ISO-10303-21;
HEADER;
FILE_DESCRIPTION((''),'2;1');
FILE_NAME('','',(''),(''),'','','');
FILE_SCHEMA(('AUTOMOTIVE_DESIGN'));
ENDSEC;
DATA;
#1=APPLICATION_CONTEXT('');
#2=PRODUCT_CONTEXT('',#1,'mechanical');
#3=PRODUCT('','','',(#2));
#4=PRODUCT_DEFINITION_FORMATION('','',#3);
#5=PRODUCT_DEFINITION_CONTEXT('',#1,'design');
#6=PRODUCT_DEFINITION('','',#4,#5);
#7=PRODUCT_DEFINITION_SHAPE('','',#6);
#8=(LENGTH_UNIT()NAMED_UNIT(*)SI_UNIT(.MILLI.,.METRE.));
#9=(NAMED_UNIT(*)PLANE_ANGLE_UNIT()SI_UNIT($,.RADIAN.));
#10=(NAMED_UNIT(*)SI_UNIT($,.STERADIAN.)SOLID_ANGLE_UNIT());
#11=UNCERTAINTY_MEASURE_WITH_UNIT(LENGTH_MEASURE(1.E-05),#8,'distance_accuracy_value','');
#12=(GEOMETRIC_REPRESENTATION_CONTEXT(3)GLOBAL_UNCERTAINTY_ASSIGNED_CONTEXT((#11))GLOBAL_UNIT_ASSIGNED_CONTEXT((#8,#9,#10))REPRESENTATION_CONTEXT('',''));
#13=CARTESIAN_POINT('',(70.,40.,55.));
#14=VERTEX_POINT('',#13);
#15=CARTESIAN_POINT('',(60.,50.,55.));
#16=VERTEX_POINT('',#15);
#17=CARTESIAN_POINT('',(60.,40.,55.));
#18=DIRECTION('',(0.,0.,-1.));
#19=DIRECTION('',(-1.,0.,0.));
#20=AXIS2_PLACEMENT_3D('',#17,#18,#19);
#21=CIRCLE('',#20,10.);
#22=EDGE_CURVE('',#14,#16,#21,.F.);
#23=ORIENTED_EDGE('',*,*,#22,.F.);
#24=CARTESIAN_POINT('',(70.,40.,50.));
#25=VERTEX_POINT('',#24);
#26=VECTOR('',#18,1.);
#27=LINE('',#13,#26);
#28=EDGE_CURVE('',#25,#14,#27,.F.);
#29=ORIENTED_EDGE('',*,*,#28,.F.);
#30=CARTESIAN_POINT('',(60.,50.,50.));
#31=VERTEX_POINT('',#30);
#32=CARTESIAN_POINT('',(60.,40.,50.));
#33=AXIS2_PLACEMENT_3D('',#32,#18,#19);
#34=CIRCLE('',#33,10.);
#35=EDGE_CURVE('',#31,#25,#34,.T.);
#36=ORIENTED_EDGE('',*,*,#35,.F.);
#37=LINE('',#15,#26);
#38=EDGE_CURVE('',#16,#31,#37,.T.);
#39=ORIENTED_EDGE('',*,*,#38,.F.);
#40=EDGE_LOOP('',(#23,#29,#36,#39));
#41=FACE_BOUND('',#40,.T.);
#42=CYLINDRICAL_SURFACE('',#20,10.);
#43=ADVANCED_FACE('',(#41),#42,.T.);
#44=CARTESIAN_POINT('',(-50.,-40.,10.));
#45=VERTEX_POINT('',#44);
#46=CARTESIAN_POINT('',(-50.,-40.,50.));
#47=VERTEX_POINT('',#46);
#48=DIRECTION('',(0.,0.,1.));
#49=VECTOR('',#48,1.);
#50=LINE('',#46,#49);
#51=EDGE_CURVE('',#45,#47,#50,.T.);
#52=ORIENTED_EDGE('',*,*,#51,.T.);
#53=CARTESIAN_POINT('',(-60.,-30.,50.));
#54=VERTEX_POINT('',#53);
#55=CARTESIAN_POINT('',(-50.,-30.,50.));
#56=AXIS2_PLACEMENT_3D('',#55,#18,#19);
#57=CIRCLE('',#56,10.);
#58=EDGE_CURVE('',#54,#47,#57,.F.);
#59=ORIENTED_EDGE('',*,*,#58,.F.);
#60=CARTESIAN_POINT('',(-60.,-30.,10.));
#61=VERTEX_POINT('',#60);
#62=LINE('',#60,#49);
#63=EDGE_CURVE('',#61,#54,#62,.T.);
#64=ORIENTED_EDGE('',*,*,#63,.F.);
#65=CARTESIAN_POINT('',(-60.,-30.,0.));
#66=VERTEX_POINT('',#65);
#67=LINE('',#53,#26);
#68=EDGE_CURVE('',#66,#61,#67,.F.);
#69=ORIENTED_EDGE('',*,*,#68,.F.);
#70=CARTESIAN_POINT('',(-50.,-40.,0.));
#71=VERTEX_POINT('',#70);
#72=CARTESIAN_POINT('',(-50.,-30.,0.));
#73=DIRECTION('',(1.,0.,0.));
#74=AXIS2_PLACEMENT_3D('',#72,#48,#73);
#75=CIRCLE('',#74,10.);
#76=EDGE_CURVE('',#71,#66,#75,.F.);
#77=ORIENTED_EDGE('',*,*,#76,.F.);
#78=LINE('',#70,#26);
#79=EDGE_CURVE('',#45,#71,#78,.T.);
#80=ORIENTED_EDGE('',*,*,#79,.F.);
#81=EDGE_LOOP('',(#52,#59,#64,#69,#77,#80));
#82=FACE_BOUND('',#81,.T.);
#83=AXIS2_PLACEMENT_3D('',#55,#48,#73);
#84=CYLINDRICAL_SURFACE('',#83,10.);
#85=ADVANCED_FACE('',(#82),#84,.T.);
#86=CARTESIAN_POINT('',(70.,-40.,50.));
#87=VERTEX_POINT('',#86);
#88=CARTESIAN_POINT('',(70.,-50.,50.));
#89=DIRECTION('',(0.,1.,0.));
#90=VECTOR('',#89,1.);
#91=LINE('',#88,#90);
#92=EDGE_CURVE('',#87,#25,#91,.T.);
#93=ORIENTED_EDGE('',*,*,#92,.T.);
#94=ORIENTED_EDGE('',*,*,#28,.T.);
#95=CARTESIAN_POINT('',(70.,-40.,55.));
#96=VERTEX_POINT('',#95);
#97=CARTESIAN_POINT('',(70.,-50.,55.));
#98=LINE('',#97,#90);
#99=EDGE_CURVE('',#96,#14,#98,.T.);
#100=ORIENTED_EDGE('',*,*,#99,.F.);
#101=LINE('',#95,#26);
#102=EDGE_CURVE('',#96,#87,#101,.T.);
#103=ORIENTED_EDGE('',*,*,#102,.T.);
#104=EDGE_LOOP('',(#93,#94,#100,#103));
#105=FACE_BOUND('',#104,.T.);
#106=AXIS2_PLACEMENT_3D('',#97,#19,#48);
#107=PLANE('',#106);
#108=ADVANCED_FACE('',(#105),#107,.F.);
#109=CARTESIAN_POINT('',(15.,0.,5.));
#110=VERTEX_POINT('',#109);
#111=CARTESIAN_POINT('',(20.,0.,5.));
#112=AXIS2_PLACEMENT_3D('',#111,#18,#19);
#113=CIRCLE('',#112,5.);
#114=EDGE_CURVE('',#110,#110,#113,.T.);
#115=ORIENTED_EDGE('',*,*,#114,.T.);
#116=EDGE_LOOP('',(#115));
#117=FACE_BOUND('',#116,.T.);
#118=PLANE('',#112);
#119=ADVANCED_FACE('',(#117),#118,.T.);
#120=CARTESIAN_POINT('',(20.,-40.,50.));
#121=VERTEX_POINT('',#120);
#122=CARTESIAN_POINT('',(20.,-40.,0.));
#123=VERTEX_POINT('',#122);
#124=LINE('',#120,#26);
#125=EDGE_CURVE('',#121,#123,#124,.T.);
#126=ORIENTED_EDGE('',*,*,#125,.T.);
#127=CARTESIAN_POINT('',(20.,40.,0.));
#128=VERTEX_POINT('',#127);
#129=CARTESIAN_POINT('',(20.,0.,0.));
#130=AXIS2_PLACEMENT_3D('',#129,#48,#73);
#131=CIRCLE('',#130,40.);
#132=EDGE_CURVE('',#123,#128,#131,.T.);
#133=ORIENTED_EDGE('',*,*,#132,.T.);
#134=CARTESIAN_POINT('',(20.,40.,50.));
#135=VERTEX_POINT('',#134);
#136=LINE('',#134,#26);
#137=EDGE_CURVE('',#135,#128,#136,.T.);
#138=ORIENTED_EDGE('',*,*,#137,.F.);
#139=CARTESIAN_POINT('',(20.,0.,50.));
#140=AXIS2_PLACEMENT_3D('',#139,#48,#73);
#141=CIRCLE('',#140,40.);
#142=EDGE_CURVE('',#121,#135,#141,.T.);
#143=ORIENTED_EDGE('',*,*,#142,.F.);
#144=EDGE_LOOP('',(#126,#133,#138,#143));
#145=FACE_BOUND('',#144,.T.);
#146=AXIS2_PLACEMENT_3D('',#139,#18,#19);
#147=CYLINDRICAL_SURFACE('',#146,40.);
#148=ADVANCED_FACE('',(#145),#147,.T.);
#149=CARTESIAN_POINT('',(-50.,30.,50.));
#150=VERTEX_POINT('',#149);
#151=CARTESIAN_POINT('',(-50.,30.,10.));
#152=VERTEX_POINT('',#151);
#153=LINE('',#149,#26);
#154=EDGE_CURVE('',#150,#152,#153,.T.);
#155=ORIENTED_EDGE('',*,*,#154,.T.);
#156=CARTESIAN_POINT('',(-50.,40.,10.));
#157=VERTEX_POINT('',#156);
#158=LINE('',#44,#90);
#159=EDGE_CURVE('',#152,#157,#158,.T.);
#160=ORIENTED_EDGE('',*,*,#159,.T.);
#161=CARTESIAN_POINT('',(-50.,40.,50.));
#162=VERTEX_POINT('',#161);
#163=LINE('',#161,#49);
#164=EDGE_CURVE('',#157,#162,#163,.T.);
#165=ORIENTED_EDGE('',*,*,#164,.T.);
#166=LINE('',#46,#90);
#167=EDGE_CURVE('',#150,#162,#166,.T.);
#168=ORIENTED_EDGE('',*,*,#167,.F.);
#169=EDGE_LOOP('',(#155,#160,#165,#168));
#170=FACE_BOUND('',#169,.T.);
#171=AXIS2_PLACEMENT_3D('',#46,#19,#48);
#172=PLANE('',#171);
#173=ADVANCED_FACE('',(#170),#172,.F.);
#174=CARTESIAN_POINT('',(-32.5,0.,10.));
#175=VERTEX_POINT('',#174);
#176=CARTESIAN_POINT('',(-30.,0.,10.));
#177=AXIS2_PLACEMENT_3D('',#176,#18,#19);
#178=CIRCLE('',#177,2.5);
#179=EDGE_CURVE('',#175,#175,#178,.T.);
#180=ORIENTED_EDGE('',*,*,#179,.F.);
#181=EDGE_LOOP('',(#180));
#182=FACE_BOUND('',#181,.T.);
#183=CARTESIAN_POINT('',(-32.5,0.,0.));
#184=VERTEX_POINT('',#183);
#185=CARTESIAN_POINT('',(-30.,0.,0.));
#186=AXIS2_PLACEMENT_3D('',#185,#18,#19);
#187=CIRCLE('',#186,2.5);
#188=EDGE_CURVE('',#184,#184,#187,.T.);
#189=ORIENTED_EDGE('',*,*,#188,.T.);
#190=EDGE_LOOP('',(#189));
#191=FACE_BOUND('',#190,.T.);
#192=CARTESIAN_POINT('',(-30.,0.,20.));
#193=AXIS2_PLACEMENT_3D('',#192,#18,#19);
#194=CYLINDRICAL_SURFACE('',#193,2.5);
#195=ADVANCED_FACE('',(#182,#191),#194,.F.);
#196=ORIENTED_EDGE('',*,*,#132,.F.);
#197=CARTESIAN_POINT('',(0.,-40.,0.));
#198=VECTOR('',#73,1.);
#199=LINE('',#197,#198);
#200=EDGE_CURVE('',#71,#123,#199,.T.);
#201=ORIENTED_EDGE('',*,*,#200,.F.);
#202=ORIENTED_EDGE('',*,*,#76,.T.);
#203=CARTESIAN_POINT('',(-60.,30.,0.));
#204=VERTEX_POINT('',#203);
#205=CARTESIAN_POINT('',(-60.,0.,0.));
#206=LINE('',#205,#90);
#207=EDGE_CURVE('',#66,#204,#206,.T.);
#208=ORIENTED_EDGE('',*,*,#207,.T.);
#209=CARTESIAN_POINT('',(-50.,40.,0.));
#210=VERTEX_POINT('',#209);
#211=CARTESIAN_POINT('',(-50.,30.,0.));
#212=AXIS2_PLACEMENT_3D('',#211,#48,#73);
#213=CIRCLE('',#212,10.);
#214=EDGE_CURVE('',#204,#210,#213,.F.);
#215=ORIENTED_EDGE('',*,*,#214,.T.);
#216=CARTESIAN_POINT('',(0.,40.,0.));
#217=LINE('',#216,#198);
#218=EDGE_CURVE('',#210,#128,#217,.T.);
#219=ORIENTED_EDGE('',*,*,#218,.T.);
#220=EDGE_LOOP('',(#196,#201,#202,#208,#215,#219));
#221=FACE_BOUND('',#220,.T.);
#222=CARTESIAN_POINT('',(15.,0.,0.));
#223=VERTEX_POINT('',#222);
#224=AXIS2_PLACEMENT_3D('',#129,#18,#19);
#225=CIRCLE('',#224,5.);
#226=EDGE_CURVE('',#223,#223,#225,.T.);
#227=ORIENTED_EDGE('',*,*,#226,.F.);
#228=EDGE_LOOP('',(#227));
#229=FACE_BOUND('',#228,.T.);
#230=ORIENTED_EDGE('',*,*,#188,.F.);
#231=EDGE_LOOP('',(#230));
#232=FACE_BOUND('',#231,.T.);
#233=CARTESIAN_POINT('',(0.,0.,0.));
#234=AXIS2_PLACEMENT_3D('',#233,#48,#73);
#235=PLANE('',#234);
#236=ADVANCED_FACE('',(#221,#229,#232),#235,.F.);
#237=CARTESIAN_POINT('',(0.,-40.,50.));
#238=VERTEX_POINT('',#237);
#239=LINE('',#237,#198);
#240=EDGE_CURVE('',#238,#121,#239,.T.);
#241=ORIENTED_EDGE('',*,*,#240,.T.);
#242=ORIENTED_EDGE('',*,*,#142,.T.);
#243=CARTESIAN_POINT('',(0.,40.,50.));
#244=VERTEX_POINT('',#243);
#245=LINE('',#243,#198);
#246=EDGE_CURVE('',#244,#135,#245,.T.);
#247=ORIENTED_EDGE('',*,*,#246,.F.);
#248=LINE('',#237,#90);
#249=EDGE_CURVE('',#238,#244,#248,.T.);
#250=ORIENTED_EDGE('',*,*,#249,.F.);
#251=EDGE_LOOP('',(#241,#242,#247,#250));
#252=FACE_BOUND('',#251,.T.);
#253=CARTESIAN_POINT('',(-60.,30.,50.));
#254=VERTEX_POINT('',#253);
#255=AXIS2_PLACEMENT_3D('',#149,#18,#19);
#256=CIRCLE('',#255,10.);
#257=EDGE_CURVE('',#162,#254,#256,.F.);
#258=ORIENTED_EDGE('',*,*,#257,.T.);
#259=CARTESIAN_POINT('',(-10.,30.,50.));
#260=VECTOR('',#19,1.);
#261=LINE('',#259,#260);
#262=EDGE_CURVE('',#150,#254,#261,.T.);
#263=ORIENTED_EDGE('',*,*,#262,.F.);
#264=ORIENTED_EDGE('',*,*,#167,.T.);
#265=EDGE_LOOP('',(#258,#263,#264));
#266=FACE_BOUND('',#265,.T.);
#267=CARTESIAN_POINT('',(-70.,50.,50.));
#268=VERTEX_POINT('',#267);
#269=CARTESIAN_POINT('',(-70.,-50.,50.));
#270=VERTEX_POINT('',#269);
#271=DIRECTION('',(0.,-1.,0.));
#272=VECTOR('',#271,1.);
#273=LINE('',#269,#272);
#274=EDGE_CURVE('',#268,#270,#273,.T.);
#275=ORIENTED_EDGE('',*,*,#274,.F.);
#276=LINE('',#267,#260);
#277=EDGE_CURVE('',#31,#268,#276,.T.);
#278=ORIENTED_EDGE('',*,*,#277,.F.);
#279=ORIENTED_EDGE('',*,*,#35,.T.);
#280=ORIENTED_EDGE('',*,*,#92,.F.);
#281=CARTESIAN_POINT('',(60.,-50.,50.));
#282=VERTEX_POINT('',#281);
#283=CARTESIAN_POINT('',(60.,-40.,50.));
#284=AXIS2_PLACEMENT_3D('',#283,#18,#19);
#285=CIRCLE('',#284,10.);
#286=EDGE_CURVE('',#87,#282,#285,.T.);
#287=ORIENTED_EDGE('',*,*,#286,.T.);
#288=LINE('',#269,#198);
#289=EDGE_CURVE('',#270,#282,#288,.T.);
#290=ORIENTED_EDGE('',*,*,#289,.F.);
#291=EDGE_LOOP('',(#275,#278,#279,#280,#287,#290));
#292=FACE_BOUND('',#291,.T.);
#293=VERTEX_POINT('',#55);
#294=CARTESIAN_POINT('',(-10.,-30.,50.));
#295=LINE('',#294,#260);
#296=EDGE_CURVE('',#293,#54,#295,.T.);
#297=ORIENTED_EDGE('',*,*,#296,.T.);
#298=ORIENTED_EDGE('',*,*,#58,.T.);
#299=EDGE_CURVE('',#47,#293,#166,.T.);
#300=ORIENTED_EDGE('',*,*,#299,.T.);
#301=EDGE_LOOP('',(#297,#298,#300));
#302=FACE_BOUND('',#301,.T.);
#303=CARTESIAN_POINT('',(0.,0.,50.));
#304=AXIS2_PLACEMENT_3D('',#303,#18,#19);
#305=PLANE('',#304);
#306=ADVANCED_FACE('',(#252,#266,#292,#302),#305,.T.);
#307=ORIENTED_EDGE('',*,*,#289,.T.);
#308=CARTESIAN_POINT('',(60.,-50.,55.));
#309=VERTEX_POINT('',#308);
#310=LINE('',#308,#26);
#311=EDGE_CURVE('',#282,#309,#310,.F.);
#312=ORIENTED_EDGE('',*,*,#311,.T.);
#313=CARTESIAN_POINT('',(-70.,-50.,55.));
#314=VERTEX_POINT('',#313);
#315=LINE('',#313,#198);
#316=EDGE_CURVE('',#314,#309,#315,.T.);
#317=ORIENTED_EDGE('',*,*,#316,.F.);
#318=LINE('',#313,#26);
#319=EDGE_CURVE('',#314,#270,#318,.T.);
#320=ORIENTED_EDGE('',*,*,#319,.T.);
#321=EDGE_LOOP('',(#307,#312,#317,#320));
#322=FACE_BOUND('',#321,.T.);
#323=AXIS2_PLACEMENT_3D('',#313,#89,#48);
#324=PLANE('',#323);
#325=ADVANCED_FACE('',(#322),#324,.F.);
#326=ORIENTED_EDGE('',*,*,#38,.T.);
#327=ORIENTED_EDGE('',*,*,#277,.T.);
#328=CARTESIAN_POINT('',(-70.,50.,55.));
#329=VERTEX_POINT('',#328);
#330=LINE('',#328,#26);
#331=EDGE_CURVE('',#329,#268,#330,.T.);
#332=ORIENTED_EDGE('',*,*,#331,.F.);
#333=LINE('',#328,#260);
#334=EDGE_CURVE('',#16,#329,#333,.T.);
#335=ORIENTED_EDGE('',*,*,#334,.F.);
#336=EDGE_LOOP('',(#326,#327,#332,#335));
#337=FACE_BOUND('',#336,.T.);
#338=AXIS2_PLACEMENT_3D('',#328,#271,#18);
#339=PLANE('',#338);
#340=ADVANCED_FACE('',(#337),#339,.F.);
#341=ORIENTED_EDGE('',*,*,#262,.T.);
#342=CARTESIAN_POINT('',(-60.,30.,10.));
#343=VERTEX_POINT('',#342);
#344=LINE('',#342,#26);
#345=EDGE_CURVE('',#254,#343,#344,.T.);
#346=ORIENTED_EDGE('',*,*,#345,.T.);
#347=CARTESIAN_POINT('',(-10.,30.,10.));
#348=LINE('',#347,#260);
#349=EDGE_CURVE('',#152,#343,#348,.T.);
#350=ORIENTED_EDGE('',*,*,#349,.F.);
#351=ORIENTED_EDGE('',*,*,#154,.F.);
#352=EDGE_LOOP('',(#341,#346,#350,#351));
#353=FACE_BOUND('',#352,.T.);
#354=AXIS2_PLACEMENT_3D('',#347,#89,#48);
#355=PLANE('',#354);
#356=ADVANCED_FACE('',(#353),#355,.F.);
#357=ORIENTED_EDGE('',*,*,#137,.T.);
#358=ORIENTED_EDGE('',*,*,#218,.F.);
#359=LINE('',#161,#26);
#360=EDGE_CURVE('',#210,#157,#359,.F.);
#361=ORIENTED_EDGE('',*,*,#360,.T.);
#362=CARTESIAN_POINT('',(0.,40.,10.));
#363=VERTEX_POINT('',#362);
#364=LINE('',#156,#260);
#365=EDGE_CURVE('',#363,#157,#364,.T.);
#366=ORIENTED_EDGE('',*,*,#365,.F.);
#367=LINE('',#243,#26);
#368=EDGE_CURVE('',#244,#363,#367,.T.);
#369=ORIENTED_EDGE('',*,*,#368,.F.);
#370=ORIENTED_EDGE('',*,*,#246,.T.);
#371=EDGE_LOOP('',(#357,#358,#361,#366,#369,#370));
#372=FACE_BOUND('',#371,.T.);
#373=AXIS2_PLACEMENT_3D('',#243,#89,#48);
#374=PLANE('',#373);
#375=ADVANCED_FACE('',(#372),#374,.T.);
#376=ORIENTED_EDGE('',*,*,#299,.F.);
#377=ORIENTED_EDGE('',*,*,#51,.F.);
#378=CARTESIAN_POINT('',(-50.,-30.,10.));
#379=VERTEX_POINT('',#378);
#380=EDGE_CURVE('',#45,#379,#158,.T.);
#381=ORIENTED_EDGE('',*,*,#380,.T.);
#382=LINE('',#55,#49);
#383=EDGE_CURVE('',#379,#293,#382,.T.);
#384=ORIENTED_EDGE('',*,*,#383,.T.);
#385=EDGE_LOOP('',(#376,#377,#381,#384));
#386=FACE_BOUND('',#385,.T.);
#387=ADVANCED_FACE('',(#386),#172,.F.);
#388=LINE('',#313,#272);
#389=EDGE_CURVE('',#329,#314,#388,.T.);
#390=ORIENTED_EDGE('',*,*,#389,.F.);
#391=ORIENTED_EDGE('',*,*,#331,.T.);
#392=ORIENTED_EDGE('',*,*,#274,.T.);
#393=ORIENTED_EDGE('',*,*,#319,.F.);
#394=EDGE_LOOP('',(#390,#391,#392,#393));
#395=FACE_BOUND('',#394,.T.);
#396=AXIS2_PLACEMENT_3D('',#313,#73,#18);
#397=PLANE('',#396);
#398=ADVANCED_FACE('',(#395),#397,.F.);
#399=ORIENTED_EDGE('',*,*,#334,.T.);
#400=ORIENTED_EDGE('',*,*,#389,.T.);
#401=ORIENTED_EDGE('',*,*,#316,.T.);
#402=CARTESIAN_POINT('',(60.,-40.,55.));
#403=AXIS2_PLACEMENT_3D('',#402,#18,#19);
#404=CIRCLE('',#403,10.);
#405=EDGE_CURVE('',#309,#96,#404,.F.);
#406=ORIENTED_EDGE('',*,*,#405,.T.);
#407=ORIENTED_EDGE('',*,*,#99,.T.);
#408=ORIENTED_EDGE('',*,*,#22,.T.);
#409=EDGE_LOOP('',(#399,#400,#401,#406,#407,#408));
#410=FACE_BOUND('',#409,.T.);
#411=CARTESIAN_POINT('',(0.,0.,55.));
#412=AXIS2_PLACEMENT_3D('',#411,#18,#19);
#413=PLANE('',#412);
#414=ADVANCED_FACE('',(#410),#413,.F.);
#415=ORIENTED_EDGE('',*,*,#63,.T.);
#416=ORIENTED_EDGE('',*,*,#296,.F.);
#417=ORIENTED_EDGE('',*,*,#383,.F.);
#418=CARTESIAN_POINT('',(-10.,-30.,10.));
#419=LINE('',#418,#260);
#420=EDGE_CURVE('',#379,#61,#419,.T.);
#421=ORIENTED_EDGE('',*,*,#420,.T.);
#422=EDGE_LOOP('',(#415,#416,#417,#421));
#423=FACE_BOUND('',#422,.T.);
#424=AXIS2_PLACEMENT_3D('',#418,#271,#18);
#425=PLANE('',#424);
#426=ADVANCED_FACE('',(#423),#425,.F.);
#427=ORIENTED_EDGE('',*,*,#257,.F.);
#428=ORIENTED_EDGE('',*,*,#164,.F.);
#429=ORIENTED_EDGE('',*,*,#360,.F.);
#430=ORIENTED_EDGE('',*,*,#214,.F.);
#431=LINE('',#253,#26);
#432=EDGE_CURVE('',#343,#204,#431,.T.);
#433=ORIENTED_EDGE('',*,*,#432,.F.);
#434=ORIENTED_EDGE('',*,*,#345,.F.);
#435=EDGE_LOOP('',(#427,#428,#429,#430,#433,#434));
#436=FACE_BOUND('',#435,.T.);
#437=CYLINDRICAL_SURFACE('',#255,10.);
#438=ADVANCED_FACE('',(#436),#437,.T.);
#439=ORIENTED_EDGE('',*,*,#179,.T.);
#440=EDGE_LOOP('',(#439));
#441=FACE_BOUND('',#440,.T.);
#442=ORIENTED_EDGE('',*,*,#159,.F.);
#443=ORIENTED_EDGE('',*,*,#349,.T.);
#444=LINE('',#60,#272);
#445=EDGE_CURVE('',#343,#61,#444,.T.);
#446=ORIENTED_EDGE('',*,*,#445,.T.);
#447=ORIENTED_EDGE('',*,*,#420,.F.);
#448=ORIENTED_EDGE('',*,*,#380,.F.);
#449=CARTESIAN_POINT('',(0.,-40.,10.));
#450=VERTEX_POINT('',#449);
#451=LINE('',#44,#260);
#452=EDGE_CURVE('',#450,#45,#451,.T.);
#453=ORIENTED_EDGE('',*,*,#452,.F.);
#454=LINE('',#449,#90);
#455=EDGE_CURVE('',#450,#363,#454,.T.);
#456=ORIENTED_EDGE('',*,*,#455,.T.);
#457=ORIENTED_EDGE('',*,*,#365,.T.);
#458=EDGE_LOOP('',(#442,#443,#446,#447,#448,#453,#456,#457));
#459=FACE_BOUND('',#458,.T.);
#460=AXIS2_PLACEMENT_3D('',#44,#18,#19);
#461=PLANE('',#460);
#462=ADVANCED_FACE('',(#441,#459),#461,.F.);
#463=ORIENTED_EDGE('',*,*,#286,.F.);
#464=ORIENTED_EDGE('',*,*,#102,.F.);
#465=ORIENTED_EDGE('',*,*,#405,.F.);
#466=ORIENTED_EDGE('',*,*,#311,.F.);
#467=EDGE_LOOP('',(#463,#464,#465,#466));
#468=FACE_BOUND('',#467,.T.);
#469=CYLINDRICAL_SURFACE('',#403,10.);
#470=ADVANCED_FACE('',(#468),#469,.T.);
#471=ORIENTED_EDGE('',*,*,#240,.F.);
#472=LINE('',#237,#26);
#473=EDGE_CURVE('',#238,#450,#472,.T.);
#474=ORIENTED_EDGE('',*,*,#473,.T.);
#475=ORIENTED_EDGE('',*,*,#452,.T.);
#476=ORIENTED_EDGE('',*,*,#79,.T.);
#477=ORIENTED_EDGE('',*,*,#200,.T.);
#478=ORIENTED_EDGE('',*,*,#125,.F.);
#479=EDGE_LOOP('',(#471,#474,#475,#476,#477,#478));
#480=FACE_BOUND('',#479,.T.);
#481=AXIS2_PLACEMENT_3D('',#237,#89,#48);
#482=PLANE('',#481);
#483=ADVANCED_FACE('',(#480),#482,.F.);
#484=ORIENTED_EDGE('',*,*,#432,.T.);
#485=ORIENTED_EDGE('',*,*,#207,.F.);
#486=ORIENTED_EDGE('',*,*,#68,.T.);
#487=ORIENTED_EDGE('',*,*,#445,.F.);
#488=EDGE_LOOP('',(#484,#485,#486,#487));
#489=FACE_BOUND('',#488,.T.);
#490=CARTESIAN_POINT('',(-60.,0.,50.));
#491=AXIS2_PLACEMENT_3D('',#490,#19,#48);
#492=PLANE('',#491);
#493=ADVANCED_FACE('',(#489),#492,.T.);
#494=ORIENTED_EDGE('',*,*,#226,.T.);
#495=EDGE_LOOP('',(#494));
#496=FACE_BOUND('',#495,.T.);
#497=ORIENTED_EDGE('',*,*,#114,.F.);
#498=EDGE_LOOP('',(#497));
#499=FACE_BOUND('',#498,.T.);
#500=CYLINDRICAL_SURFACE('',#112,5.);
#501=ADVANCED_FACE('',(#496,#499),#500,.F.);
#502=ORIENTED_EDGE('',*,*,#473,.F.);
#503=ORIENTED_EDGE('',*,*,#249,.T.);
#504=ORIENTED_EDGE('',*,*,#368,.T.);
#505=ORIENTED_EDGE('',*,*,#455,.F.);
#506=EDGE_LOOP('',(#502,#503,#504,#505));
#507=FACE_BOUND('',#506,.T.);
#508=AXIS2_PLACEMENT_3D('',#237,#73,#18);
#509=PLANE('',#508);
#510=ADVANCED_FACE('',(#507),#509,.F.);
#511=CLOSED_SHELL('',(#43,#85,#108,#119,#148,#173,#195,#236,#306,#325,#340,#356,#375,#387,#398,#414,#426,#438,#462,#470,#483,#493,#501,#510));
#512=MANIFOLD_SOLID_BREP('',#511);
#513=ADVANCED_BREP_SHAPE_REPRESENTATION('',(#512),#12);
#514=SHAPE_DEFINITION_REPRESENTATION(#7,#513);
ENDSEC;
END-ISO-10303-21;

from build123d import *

# Parameters (mm, degrees)
SALIENTE_EXTRUIR2_DEPTH = 50
CROQUIS4_W              = 140
CROQUIS4_H              = 100
SALIENTE_EXTRUIR3_DEPTH = 5
CROQUIS5_R              = 5
CORTAR_EXTRUIR1_DEPTH   = 5
CROQUIS6_W              = 50
CROQUIS6_H              = 40
CORTAR_EXTRUIR2_DEPTH   = 80
CROQUIS7_W              = 40
CROQUIS7_H              = 60
CORTAR_EXTRUIR3_DEPTH   = 50
CROQUIS8_R              = 2.5
CORTAR_EXTRUIR5_DEPTH   = 20
REDONDEO1_R             = 10
REDONDEO2_R             = 10
REDONDEO3_R             = 10
REDONDEO4_R             = 10


with BuildPart() as part:
    # Croquis1 → Saliente-Extruir2 (new body)
    with BuildSketch(Plane.XY):
        with BuildLine():
            Line((-60, 40), (-60, -40))
            Line((-60, -40), (20.000000086, -40))
            ThreePointArc((20.000000086, -40), (60, 8.6e-08), (19.999999914, 40))
            Line((19.999999914, 40), (-60, 40))
        make_face()
    extrude(amount=SALIENTE_EXTRUIR2_DEPTH)

    # Croquis4 → Saliente-Extruir3 (add)
    with BuildSketch(Plane.XY.offset(50)):
        Rectangle(CROQUIS4_W, CROQUIS4_H)
    extrude(amount=SALIENTE_EXTRUIR3_DEPTH)

    # Croquis5 → Cortar-Extruir1 (cut)
    with BuildSketch(Plane(origin=(0, 0, 0), x_dir=(-1, 0, 0), z_dir=(0, 0, -1))):
        with Locations((-20, 0)):
            Circle(CROQUIS5_R)
    extrude(amount=-CORTAR_EXTRUIR1_DEPTH, mode=Mode.SUBTRACT)

    # Croquis6 → Cortar-Extruir2 (cut)
    with BuildSketch(Plane(origin=(0, 40, 0), x_dir=(1, 0, 0), z_dir=(0, 1, 0))):
        with Locations((-25, -30)):
            Rectangle(CROQUIS6_W, CROQUIS6_H)
    extrude(amount=-CORTAR_EXTRUIR2_DEPTH, mode=Mode.SUBTRACT)

    # Croquis7 → Cortar-Extruir3 (cut)
    with BuildSketch(Plane.ZY.offset(60)):
        with Locations((30, 0)):
            Rectangle(CROQUIS7_W, CROQUIS7_H)
    extrude(amount=-CORTAR_EXTRUIR3_DEPTH, mode=Mode.SUBTRACT)

    # Croquis8 → Cortar-Extruir5 (cut)
    with BuildSketch(Plane(origin=(0, 0, 0), x_dir=(-1, 0, 0), z_dir=(0, 0, -1))):
        with Locations((30, 0)):
            Circle(CROQUIS8_R)
    extrude(amount=-CORTAR_EXTRUIR5_DEPTH, mode=Mode.SUBTRACT)

    # Redondeo1
    redondeo1_edges = [part.edges().sort_by_distance(p)[0] for p in [
        (70, -50, 52.5),
    ]]
    fillet(redondeo1_edges, radius=REDONDEO1_R)

    # Redondeo2
    redondeo2_edges = [part.edges().sort_by_distance(p)[0] for p in [
        (70, 50, 52.5),
    ]]
    fillet(redondeo2_edges, radius=REDONDEO2_R)

    # Redondeo3
    redondeo3_edges = [part.edges().sort_by_distance(p)[0] for p in [
        (-60, -40, 25),
    ]]
    fillet(redondeo3_edges, radius=REDONDEO3_R)

    # Redondeo4
    redondeo4_edges = [part.edges().sort_by_distance(p)[0] for p in [
        (-60, 40, 25),
    ]]
    fillet(redondeo4_edges, radius=REDONDEO4_R - 0.0001)  # a hair under: the kernel refuses the full size


solid = part.part
